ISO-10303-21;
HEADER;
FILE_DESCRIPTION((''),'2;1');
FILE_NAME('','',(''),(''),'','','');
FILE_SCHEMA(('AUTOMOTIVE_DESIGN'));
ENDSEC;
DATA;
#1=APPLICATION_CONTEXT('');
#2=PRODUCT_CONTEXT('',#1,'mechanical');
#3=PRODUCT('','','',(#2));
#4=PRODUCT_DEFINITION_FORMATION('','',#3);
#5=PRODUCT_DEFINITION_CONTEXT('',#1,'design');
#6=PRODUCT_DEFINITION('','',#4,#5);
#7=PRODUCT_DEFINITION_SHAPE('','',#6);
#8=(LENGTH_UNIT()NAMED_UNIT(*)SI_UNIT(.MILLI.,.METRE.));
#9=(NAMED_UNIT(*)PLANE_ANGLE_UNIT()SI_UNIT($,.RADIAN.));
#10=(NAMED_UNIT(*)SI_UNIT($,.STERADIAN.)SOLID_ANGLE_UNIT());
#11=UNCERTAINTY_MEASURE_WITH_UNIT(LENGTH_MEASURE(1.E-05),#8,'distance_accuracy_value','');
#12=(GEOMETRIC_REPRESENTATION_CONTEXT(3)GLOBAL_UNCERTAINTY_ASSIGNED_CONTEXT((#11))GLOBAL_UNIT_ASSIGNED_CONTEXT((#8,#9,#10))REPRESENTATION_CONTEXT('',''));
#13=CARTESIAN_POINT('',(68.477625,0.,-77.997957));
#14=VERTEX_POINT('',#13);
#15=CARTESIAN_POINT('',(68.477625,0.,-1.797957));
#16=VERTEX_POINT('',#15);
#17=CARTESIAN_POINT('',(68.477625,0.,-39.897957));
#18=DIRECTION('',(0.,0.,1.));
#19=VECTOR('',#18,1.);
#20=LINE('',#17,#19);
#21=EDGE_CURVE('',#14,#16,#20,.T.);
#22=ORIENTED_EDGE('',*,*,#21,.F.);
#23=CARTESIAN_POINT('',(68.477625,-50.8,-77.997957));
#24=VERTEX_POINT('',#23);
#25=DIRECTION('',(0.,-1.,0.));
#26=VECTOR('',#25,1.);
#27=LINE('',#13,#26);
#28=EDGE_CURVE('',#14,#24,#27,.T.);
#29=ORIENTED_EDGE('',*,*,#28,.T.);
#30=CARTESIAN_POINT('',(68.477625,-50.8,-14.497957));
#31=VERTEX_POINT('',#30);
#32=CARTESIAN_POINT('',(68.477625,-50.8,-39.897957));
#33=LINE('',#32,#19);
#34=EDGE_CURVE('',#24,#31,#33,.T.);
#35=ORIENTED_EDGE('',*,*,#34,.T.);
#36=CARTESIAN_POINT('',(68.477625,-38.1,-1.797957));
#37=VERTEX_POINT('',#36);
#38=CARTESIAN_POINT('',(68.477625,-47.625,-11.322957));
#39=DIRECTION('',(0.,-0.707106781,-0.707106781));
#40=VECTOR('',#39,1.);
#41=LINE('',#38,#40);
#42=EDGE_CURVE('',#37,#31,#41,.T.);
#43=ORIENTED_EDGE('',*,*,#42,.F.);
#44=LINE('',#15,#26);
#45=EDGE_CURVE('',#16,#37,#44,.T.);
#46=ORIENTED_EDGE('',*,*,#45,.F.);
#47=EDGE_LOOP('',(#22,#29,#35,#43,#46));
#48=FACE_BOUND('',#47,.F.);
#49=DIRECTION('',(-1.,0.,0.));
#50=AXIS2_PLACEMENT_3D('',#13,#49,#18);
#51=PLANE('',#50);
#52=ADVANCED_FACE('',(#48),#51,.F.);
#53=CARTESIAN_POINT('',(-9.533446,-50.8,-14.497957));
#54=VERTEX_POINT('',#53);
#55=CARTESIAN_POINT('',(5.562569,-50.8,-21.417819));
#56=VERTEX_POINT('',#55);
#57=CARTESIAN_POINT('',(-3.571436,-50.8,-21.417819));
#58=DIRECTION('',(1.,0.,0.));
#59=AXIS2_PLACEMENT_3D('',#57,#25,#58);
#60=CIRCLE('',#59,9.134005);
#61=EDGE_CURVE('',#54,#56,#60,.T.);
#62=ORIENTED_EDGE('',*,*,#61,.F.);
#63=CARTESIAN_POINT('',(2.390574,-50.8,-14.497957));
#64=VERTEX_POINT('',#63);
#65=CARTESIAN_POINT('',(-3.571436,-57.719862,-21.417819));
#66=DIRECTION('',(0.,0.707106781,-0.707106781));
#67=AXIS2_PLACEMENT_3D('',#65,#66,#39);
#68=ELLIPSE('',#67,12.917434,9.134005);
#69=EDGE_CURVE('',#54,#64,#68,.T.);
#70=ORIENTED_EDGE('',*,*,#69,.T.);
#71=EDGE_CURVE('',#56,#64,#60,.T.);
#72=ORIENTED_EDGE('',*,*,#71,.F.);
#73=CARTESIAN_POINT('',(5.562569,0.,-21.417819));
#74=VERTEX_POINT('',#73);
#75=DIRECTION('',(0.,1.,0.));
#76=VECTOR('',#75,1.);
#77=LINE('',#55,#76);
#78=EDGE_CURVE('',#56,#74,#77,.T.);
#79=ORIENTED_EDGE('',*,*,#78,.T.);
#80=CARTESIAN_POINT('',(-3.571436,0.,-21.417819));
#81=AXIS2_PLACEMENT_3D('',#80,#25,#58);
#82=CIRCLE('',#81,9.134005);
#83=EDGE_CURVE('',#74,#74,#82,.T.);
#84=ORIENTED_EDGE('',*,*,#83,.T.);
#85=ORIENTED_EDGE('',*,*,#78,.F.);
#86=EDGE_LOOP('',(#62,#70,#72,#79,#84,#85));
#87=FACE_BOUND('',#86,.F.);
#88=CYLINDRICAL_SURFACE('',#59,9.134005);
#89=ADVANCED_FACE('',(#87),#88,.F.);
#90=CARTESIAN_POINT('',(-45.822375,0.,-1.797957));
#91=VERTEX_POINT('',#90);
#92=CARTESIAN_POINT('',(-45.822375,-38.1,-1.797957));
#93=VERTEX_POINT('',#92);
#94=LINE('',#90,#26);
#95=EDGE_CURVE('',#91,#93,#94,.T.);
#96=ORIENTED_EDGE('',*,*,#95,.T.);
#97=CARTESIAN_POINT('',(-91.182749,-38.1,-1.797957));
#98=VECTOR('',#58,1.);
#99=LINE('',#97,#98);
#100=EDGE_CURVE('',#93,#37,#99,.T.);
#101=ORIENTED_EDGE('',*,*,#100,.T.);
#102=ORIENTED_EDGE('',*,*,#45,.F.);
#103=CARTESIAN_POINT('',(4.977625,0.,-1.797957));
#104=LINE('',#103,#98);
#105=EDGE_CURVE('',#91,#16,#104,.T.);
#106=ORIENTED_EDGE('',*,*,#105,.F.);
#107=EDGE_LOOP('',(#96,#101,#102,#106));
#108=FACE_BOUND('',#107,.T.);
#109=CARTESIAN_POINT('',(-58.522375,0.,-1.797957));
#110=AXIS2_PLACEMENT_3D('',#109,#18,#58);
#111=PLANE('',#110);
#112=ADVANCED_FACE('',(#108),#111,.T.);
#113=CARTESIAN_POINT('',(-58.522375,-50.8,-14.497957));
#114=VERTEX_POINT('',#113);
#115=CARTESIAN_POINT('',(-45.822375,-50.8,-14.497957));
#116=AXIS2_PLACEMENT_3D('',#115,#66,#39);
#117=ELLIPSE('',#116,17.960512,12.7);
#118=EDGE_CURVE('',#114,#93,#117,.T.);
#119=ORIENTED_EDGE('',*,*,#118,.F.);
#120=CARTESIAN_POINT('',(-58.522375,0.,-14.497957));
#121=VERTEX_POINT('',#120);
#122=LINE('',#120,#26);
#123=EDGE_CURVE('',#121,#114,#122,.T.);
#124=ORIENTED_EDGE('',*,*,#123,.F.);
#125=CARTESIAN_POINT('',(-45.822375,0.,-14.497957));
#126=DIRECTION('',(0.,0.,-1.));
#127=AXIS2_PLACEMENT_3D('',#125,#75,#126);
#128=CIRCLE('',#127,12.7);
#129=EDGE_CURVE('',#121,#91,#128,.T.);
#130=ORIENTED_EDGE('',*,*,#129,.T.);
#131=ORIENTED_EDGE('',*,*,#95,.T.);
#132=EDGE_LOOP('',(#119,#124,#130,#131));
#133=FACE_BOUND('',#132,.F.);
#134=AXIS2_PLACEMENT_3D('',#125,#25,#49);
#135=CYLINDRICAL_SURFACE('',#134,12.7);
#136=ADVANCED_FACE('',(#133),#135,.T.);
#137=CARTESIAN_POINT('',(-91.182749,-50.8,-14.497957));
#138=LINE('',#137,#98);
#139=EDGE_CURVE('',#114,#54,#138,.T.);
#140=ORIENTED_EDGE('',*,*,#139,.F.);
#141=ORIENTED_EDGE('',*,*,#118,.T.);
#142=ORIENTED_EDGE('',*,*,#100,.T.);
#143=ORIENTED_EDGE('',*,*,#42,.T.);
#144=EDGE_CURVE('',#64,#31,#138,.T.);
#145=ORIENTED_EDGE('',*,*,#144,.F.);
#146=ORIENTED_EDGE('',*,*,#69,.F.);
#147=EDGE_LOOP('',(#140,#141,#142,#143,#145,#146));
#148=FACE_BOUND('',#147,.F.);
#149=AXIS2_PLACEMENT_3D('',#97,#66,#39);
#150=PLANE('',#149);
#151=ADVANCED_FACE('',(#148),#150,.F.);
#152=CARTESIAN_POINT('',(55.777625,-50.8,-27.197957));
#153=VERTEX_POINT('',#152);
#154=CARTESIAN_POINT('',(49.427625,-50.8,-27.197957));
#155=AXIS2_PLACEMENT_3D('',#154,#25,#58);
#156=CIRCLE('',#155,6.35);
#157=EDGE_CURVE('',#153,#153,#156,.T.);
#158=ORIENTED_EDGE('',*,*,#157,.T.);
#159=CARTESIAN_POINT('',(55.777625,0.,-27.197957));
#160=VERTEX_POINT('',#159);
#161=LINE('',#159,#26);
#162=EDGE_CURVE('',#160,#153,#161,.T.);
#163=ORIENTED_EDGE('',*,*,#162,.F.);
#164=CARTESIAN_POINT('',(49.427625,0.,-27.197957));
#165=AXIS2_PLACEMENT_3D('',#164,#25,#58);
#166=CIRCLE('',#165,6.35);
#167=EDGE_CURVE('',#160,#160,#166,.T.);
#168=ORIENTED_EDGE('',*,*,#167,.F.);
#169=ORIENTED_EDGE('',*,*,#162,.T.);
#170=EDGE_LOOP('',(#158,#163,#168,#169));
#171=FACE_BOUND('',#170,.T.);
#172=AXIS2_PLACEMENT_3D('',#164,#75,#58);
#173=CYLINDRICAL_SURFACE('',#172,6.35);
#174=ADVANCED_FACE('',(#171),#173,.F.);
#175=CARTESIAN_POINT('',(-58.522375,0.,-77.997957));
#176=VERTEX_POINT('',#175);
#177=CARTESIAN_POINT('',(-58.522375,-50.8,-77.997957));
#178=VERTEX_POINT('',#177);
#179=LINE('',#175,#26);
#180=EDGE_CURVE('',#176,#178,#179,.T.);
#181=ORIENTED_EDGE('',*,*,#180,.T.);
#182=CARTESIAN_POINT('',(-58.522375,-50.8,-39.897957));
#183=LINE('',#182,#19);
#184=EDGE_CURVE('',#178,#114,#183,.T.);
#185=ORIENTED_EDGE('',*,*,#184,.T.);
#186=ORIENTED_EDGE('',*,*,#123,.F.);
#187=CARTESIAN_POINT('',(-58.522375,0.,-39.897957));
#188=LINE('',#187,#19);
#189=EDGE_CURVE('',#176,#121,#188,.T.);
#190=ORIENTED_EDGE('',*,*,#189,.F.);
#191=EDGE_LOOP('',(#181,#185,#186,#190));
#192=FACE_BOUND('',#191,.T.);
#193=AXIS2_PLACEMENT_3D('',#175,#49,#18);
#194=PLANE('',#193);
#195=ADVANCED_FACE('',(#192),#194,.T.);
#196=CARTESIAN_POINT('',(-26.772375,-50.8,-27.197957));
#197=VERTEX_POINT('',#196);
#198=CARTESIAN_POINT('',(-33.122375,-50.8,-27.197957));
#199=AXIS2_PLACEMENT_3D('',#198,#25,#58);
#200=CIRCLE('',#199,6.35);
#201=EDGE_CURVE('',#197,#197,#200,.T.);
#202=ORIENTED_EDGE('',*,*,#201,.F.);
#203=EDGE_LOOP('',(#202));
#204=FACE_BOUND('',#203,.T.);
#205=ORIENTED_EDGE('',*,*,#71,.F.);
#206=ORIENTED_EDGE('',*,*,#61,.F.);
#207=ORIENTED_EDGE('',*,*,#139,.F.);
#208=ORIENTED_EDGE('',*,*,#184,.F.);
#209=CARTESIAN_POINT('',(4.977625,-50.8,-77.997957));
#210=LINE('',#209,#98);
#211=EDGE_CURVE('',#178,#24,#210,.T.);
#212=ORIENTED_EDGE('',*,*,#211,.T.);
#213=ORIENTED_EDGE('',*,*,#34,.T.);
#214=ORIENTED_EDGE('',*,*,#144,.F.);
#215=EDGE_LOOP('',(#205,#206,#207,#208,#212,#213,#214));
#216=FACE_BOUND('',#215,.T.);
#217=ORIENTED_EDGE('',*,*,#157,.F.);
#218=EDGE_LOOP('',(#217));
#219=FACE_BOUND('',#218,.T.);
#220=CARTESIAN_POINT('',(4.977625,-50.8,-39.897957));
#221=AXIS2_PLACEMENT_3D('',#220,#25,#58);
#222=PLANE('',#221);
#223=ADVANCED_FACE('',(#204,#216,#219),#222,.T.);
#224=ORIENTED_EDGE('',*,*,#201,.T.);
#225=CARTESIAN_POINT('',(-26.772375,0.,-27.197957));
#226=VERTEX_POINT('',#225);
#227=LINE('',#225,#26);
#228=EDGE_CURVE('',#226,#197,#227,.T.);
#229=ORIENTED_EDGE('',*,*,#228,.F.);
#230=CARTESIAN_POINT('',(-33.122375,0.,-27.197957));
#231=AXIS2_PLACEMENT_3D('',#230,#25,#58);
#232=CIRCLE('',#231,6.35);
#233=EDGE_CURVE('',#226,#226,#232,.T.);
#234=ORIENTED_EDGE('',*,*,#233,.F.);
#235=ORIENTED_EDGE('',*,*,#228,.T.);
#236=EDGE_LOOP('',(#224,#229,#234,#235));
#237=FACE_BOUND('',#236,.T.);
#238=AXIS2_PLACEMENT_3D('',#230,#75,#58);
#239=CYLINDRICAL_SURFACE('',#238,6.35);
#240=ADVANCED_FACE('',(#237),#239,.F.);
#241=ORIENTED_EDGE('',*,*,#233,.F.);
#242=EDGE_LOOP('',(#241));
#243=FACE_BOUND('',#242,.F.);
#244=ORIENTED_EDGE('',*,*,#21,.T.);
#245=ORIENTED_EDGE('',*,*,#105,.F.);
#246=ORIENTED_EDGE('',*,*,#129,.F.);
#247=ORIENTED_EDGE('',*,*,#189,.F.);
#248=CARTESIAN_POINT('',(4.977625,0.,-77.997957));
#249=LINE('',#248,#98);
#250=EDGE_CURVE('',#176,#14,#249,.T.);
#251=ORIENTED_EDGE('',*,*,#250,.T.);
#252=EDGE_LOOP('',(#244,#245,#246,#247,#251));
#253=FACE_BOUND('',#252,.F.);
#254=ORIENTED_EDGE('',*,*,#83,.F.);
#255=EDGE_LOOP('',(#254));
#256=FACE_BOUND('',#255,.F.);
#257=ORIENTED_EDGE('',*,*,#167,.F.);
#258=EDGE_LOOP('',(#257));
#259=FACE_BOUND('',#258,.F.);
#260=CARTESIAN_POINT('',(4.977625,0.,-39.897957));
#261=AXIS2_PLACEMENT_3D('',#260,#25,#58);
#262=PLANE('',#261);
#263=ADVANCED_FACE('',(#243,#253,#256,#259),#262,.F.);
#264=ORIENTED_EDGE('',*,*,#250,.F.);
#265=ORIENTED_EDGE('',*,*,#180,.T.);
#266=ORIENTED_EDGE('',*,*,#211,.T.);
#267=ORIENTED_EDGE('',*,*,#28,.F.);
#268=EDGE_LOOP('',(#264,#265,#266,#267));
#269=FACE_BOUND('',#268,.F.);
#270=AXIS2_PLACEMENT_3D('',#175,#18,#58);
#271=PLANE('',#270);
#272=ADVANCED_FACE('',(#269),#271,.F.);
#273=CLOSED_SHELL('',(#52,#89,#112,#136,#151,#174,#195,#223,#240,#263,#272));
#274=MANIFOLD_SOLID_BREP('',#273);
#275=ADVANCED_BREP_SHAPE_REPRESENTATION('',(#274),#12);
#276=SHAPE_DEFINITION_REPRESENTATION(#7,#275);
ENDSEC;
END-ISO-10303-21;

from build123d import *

# Parameters (mm, degrees)
F0_W        = 127
F0_H        = 76.2
F0_R        = 6.35
F1_DEPTH    = 50.8
F2_R        = 9.1340050973
F3_DEPTH    = 70.104
F4_T1_DEPTH = 192.3207478943
F5_R        = 12.7


# Not quite as in the source:
# - a fillet or chamfer that OpenCascade refuses, or shapes differently, is made with other operations: its cross-section is extruded or revolved along the edge and cut away or added


with BuildPart() as f1:
    # F0 (on Front) → F1 (new body)
    with BuildSketch(Plane.XZ):
        with Locations((4.9776248634, -39.8979571181)):
            Rectangle(F0_W, F0_H)
        with Locations((-33.1223751366, -27.1979571181)):
            Circle(F0_R, mode=Mode.SUBTRACT)
        with Locations((49.4276248634, -27.1979571181)):
            Circle(F0_R, mode=Mode.SUBTRACT)
    extrude(amount=F1_DEPTH)

    # F2 (on face) → F3 (cut)
    with BuildSketch(Plane.XZ.offset(50.8)):
        with Locations((-3.571436042, -21.4178189635)):
            Circle(F2_R)
    extrude(amount=-F3_DEPTH, mode=Mode.SUBTRACT)

    # F4: chamfer of 12.7 on 1 edges, made by hand

    # F4_s2 → F4_t1 (cut)
    with BuildSketch(Plane.YZ.offset(-91.1827490838)):
        Polygon((-38.1, -1.7979571181), (-50.8, -14.4979571181), (-50.8, -1.7979571181), align=None)
    extrude(amount=F4_T1_DEPTH, mode=Mode.SUBTRACT)

    # F5
    f5_edges = [f1.edges().sort_by_distance(p)[0] for p in [
        (-58.522375, -19.05, -1.797957),
    ]]
    fillet(f5_edges, radius=F5_R)


solid = f1.part
